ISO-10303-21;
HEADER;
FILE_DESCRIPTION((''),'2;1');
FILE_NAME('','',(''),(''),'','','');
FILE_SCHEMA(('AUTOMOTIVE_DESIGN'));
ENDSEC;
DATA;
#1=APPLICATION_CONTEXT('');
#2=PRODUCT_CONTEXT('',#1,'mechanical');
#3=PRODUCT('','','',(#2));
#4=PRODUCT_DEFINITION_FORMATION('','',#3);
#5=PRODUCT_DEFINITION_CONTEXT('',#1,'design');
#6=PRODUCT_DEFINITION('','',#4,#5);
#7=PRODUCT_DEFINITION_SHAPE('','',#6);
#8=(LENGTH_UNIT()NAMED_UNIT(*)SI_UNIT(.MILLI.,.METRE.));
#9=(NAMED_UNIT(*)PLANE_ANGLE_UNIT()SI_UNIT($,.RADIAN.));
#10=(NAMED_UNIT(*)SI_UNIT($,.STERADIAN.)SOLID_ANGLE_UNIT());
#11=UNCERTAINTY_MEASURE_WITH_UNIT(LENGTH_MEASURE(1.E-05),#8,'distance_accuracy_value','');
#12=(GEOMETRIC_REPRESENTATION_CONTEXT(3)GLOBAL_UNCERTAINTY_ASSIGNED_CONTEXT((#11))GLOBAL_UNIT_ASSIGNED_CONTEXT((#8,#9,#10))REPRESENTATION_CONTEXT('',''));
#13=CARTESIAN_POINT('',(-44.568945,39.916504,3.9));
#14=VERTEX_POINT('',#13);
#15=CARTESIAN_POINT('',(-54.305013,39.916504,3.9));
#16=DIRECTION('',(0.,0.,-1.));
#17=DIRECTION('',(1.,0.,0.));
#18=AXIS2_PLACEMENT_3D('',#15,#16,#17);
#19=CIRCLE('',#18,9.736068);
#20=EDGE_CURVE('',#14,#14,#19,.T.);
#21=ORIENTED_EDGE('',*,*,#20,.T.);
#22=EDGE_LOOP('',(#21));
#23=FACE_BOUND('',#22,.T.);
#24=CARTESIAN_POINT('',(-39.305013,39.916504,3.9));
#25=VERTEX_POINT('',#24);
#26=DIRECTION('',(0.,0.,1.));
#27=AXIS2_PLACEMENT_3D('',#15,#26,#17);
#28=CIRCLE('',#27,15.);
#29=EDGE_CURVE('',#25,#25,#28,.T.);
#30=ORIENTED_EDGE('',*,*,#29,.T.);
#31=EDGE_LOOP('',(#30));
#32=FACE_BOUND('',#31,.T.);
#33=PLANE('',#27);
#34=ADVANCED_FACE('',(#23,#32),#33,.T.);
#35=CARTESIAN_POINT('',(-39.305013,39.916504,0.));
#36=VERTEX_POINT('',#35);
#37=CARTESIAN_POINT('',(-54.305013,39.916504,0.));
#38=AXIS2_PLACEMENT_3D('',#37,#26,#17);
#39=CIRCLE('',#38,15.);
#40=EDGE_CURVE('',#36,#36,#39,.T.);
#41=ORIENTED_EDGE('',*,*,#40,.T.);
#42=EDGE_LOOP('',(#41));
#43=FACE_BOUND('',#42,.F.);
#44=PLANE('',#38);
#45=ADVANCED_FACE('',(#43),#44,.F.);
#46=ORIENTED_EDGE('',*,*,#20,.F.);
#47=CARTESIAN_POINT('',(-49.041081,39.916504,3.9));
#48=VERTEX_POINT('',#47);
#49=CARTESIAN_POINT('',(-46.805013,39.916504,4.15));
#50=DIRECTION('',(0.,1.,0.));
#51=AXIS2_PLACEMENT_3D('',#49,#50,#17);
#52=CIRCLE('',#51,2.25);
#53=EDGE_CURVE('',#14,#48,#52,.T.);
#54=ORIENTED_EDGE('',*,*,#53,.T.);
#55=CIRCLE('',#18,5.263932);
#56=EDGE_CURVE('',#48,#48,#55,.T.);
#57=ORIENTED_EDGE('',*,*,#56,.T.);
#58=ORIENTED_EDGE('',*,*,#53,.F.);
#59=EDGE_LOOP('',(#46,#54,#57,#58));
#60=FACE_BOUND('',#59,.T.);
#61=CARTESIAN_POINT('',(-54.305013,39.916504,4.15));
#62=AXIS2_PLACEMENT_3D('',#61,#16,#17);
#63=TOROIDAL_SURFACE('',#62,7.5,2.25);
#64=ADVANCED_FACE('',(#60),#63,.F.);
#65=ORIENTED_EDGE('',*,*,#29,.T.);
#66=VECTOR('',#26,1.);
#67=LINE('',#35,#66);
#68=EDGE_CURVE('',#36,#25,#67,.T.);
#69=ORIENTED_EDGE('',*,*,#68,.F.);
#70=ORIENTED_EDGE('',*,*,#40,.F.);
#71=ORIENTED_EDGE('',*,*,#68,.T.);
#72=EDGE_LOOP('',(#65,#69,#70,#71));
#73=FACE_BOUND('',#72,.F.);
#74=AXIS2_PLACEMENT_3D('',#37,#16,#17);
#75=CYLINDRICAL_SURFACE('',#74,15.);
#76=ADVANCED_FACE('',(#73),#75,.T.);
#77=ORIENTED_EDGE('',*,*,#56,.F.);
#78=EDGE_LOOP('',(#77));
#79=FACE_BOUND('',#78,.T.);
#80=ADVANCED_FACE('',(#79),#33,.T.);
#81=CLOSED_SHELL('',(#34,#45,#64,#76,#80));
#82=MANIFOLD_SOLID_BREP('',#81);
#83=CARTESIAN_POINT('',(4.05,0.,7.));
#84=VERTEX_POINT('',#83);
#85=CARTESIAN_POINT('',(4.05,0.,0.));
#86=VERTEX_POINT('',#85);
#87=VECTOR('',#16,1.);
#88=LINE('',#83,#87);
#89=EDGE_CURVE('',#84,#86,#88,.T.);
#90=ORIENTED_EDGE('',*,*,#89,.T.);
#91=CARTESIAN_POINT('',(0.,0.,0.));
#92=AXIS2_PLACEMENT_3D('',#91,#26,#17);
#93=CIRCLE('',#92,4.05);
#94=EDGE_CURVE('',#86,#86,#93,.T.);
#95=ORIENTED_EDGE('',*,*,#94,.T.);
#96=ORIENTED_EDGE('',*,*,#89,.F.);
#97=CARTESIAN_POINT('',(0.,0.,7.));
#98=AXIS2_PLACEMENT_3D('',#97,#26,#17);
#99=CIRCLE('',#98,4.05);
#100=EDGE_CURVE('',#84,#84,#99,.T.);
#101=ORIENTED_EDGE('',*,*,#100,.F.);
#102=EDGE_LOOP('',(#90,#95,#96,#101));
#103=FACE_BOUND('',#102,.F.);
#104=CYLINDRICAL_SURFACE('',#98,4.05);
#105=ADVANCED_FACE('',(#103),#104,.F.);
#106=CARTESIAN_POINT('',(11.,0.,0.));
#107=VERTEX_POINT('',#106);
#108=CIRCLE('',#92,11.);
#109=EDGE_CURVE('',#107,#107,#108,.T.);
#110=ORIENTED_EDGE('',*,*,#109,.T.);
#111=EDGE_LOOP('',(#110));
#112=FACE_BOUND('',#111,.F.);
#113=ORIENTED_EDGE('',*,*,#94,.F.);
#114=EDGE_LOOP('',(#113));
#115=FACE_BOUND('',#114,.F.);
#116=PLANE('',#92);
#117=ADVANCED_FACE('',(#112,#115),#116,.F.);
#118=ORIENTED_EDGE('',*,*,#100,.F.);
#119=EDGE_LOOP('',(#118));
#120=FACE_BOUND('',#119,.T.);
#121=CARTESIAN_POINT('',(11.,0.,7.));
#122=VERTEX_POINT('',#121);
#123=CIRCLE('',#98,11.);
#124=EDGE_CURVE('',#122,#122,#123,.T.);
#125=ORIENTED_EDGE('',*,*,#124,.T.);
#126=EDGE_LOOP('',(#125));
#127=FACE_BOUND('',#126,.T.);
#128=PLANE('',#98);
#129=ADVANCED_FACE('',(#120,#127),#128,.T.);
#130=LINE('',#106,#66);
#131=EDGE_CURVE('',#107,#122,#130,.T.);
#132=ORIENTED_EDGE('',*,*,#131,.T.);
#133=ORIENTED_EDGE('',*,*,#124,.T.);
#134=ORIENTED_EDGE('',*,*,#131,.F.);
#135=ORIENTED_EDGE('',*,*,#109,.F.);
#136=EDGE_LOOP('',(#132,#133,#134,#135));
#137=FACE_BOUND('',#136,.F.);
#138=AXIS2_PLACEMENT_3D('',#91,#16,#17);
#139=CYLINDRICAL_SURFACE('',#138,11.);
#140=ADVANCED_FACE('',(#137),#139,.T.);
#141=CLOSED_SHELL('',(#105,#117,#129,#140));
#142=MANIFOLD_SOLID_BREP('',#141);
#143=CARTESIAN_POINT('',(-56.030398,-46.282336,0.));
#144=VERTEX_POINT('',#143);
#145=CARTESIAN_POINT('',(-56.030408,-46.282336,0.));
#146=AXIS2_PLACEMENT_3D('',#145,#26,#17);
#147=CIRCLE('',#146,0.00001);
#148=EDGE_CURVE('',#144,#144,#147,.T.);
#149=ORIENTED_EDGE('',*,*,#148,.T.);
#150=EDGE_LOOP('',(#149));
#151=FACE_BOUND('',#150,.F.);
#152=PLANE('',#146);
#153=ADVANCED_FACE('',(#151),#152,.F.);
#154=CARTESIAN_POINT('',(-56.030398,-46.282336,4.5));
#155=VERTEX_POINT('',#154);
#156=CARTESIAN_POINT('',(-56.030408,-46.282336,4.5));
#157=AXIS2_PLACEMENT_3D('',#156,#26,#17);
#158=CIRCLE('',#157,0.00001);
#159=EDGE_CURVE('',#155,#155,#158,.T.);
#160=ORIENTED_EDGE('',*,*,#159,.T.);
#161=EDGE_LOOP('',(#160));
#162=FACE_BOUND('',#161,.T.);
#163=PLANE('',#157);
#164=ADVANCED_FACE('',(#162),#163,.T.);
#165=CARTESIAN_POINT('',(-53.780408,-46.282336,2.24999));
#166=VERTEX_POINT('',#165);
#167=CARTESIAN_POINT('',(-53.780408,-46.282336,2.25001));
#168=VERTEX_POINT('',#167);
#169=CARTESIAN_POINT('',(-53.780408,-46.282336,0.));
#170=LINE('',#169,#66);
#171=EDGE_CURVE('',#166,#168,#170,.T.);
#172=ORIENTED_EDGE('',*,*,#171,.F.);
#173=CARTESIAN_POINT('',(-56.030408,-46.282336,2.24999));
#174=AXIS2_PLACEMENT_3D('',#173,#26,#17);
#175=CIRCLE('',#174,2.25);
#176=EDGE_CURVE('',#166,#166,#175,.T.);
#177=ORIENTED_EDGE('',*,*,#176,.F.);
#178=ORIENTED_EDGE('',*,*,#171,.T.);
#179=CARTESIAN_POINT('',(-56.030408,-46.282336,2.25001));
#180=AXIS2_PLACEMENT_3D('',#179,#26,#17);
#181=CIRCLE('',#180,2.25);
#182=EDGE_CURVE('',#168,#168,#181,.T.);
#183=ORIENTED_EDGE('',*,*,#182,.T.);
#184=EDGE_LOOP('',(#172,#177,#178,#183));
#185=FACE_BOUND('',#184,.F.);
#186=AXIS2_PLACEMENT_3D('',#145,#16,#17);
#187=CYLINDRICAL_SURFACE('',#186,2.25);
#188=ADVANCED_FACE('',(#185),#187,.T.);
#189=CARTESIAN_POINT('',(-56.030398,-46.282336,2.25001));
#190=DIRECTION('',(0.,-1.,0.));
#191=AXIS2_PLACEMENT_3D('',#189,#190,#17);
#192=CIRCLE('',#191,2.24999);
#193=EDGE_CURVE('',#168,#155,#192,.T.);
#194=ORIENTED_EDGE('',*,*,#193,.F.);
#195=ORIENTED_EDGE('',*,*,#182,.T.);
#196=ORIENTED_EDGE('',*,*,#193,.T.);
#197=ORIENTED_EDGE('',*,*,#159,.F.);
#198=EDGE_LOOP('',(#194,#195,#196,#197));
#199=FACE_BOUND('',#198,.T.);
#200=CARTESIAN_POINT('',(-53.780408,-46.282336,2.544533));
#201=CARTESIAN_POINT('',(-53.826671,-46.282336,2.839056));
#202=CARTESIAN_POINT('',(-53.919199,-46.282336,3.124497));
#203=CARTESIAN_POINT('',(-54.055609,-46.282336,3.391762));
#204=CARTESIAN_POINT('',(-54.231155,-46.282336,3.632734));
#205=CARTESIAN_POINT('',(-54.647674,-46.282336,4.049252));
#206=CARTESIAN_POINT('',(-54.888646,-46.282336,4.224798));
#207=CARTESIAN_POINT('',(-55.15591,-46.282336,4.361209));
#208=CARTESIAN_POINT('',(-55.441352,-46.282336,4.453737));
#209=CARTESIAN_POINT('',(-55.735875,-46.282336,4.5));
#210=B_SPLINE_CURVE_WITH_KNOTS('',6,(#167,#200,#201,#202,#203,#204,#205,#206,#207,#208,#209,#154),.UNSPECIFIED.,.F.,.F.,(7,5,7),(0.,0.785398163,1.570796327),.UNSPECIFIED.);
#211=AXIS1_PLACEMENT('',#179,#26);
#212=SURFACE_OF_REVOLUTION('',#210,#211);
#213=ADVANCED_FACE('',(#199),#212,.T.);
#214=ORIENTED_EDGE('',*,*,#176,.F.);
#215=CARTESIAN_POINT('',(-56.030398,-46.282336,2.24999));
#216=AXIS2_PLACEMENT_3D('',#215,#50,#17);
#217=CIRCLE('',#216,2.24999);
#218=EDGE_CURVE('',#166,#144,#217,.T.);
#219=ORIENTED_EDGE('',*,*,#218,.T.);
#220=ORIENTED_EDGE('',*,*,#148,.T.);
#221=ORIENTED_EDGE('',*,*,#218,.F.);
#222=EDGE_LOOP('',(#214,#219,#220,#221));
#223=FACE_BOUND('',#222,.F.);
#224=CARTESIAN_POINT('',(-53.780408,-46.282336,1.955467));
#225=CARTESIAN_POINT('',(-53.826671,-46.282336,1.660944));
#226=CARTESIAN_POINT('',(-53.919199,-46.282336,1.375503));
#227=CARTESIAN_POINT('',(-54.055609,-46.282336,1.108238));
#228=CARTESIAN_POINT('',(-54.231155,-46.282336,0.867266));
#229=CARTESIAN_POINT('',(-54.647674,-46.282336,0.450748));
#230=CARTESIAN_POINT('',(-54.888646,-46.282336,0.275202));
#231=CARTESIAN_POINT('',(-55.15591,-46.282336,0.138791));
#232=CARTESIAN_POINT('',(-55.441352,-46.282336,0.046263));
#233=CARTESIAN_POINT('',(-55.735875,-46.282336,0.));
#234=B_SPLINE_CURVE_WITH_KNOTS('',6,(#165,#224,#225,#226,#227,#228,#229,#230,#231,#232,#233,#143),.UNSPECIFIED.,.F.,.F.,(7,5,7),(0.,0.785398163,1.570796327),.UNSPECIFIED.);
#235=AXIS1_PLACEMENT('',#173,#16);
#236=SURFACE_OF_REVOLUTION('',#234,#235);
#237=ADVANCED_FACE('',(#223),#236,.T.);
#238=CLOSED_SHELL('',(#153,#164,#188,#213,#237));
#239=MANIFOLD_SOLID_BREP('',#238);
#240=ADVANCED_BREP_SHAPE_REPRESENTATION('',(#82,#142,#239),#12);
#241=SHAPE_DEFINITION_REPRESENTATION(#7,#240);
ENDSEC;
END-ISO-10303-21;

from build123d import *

# Parameters (mm, degrees)
F0_R      = 11
F0_R_2    = 2.5
F1_DEPTH  = 7
F2_R      = 2.25
F3_DEPTH  = 4.5
F4_R      = 2.24999
F5_R      = 15
F6_DEPTH  = 3.9
F11_R     = 4.05
F12_DEPTH = 25


# Not quite as in the source:
# - a fillet or chamfer is up to 0.001 mm smaller than in the source, because OpenCascade refuses the exact size


with BuildPart() as f1:
    # F0 (on Top) → F1 (new body)
    with BuildSketch(Plane.XY):
        Circle(F0_R)
        Circle(F0_R_2, mode=Mode.SUBTRACT)
    extrude(amount=F1_DEPTH)

    # F11 (on face) → F12 (cut)
    with BuildSketch(Plane.XY.offset(7)):
        Circle(F11_R)
    extrude(amount=-F12_DEPTH, mode=Mode.SUBTRACT)


with BuildPart() as f3:
    # F2 (on Top) → F3 (new body)
    with BuildSketch(Plane.XY):
        with Locations((-56.030407548, -46.2823361158)):
            Circle(F2_R)
    extrude(amount=F3_DEPTH)

    # F4 (radius 2.25 in the source; OpenCascade refuses exactly that, so slightly less here)
    f4_edges = [f3.edges().sort_by_distance(p)[0] for p in [
        (-58.280408, -46.282336, 4.5),
        (-58.280408, -46.282336, 0),
    ]]
    fillet(f4_edges, radius=F4_R)


with BuildPart() as f6:
    # F5 (on Top) → F6 (new body)
    with BuildSketch(Plane.XY):
        with Locations((-54.3050132692, 39.9165041745)):
            Circle(F5_R)
    extrude(amount=F6_DEPTH)

    # F9 (on line) → F10 (revolve, cut)
    with BuildSketch(Plane(origin=(0, 39.9165041745, 0), x_dir=(-1, 0, 0), z_dir=(0, 1, 0))):
        with BuildLine():
            Line((49.0550132692, 4.15), (44.5550132692, 4.15))
            ThreePointArc((44.5550132692, 4.15), (46.8050132692, 1.9), (49.0550132692, 4.15))
        make_face()
    revolve(axis=Axis((-54.3050132692, 39.9165041745, 3.9), (0, 0, 1)), mode=Mode.SUBTRACT)


solid = Compound([f1.part, f3.part, f6.part])
